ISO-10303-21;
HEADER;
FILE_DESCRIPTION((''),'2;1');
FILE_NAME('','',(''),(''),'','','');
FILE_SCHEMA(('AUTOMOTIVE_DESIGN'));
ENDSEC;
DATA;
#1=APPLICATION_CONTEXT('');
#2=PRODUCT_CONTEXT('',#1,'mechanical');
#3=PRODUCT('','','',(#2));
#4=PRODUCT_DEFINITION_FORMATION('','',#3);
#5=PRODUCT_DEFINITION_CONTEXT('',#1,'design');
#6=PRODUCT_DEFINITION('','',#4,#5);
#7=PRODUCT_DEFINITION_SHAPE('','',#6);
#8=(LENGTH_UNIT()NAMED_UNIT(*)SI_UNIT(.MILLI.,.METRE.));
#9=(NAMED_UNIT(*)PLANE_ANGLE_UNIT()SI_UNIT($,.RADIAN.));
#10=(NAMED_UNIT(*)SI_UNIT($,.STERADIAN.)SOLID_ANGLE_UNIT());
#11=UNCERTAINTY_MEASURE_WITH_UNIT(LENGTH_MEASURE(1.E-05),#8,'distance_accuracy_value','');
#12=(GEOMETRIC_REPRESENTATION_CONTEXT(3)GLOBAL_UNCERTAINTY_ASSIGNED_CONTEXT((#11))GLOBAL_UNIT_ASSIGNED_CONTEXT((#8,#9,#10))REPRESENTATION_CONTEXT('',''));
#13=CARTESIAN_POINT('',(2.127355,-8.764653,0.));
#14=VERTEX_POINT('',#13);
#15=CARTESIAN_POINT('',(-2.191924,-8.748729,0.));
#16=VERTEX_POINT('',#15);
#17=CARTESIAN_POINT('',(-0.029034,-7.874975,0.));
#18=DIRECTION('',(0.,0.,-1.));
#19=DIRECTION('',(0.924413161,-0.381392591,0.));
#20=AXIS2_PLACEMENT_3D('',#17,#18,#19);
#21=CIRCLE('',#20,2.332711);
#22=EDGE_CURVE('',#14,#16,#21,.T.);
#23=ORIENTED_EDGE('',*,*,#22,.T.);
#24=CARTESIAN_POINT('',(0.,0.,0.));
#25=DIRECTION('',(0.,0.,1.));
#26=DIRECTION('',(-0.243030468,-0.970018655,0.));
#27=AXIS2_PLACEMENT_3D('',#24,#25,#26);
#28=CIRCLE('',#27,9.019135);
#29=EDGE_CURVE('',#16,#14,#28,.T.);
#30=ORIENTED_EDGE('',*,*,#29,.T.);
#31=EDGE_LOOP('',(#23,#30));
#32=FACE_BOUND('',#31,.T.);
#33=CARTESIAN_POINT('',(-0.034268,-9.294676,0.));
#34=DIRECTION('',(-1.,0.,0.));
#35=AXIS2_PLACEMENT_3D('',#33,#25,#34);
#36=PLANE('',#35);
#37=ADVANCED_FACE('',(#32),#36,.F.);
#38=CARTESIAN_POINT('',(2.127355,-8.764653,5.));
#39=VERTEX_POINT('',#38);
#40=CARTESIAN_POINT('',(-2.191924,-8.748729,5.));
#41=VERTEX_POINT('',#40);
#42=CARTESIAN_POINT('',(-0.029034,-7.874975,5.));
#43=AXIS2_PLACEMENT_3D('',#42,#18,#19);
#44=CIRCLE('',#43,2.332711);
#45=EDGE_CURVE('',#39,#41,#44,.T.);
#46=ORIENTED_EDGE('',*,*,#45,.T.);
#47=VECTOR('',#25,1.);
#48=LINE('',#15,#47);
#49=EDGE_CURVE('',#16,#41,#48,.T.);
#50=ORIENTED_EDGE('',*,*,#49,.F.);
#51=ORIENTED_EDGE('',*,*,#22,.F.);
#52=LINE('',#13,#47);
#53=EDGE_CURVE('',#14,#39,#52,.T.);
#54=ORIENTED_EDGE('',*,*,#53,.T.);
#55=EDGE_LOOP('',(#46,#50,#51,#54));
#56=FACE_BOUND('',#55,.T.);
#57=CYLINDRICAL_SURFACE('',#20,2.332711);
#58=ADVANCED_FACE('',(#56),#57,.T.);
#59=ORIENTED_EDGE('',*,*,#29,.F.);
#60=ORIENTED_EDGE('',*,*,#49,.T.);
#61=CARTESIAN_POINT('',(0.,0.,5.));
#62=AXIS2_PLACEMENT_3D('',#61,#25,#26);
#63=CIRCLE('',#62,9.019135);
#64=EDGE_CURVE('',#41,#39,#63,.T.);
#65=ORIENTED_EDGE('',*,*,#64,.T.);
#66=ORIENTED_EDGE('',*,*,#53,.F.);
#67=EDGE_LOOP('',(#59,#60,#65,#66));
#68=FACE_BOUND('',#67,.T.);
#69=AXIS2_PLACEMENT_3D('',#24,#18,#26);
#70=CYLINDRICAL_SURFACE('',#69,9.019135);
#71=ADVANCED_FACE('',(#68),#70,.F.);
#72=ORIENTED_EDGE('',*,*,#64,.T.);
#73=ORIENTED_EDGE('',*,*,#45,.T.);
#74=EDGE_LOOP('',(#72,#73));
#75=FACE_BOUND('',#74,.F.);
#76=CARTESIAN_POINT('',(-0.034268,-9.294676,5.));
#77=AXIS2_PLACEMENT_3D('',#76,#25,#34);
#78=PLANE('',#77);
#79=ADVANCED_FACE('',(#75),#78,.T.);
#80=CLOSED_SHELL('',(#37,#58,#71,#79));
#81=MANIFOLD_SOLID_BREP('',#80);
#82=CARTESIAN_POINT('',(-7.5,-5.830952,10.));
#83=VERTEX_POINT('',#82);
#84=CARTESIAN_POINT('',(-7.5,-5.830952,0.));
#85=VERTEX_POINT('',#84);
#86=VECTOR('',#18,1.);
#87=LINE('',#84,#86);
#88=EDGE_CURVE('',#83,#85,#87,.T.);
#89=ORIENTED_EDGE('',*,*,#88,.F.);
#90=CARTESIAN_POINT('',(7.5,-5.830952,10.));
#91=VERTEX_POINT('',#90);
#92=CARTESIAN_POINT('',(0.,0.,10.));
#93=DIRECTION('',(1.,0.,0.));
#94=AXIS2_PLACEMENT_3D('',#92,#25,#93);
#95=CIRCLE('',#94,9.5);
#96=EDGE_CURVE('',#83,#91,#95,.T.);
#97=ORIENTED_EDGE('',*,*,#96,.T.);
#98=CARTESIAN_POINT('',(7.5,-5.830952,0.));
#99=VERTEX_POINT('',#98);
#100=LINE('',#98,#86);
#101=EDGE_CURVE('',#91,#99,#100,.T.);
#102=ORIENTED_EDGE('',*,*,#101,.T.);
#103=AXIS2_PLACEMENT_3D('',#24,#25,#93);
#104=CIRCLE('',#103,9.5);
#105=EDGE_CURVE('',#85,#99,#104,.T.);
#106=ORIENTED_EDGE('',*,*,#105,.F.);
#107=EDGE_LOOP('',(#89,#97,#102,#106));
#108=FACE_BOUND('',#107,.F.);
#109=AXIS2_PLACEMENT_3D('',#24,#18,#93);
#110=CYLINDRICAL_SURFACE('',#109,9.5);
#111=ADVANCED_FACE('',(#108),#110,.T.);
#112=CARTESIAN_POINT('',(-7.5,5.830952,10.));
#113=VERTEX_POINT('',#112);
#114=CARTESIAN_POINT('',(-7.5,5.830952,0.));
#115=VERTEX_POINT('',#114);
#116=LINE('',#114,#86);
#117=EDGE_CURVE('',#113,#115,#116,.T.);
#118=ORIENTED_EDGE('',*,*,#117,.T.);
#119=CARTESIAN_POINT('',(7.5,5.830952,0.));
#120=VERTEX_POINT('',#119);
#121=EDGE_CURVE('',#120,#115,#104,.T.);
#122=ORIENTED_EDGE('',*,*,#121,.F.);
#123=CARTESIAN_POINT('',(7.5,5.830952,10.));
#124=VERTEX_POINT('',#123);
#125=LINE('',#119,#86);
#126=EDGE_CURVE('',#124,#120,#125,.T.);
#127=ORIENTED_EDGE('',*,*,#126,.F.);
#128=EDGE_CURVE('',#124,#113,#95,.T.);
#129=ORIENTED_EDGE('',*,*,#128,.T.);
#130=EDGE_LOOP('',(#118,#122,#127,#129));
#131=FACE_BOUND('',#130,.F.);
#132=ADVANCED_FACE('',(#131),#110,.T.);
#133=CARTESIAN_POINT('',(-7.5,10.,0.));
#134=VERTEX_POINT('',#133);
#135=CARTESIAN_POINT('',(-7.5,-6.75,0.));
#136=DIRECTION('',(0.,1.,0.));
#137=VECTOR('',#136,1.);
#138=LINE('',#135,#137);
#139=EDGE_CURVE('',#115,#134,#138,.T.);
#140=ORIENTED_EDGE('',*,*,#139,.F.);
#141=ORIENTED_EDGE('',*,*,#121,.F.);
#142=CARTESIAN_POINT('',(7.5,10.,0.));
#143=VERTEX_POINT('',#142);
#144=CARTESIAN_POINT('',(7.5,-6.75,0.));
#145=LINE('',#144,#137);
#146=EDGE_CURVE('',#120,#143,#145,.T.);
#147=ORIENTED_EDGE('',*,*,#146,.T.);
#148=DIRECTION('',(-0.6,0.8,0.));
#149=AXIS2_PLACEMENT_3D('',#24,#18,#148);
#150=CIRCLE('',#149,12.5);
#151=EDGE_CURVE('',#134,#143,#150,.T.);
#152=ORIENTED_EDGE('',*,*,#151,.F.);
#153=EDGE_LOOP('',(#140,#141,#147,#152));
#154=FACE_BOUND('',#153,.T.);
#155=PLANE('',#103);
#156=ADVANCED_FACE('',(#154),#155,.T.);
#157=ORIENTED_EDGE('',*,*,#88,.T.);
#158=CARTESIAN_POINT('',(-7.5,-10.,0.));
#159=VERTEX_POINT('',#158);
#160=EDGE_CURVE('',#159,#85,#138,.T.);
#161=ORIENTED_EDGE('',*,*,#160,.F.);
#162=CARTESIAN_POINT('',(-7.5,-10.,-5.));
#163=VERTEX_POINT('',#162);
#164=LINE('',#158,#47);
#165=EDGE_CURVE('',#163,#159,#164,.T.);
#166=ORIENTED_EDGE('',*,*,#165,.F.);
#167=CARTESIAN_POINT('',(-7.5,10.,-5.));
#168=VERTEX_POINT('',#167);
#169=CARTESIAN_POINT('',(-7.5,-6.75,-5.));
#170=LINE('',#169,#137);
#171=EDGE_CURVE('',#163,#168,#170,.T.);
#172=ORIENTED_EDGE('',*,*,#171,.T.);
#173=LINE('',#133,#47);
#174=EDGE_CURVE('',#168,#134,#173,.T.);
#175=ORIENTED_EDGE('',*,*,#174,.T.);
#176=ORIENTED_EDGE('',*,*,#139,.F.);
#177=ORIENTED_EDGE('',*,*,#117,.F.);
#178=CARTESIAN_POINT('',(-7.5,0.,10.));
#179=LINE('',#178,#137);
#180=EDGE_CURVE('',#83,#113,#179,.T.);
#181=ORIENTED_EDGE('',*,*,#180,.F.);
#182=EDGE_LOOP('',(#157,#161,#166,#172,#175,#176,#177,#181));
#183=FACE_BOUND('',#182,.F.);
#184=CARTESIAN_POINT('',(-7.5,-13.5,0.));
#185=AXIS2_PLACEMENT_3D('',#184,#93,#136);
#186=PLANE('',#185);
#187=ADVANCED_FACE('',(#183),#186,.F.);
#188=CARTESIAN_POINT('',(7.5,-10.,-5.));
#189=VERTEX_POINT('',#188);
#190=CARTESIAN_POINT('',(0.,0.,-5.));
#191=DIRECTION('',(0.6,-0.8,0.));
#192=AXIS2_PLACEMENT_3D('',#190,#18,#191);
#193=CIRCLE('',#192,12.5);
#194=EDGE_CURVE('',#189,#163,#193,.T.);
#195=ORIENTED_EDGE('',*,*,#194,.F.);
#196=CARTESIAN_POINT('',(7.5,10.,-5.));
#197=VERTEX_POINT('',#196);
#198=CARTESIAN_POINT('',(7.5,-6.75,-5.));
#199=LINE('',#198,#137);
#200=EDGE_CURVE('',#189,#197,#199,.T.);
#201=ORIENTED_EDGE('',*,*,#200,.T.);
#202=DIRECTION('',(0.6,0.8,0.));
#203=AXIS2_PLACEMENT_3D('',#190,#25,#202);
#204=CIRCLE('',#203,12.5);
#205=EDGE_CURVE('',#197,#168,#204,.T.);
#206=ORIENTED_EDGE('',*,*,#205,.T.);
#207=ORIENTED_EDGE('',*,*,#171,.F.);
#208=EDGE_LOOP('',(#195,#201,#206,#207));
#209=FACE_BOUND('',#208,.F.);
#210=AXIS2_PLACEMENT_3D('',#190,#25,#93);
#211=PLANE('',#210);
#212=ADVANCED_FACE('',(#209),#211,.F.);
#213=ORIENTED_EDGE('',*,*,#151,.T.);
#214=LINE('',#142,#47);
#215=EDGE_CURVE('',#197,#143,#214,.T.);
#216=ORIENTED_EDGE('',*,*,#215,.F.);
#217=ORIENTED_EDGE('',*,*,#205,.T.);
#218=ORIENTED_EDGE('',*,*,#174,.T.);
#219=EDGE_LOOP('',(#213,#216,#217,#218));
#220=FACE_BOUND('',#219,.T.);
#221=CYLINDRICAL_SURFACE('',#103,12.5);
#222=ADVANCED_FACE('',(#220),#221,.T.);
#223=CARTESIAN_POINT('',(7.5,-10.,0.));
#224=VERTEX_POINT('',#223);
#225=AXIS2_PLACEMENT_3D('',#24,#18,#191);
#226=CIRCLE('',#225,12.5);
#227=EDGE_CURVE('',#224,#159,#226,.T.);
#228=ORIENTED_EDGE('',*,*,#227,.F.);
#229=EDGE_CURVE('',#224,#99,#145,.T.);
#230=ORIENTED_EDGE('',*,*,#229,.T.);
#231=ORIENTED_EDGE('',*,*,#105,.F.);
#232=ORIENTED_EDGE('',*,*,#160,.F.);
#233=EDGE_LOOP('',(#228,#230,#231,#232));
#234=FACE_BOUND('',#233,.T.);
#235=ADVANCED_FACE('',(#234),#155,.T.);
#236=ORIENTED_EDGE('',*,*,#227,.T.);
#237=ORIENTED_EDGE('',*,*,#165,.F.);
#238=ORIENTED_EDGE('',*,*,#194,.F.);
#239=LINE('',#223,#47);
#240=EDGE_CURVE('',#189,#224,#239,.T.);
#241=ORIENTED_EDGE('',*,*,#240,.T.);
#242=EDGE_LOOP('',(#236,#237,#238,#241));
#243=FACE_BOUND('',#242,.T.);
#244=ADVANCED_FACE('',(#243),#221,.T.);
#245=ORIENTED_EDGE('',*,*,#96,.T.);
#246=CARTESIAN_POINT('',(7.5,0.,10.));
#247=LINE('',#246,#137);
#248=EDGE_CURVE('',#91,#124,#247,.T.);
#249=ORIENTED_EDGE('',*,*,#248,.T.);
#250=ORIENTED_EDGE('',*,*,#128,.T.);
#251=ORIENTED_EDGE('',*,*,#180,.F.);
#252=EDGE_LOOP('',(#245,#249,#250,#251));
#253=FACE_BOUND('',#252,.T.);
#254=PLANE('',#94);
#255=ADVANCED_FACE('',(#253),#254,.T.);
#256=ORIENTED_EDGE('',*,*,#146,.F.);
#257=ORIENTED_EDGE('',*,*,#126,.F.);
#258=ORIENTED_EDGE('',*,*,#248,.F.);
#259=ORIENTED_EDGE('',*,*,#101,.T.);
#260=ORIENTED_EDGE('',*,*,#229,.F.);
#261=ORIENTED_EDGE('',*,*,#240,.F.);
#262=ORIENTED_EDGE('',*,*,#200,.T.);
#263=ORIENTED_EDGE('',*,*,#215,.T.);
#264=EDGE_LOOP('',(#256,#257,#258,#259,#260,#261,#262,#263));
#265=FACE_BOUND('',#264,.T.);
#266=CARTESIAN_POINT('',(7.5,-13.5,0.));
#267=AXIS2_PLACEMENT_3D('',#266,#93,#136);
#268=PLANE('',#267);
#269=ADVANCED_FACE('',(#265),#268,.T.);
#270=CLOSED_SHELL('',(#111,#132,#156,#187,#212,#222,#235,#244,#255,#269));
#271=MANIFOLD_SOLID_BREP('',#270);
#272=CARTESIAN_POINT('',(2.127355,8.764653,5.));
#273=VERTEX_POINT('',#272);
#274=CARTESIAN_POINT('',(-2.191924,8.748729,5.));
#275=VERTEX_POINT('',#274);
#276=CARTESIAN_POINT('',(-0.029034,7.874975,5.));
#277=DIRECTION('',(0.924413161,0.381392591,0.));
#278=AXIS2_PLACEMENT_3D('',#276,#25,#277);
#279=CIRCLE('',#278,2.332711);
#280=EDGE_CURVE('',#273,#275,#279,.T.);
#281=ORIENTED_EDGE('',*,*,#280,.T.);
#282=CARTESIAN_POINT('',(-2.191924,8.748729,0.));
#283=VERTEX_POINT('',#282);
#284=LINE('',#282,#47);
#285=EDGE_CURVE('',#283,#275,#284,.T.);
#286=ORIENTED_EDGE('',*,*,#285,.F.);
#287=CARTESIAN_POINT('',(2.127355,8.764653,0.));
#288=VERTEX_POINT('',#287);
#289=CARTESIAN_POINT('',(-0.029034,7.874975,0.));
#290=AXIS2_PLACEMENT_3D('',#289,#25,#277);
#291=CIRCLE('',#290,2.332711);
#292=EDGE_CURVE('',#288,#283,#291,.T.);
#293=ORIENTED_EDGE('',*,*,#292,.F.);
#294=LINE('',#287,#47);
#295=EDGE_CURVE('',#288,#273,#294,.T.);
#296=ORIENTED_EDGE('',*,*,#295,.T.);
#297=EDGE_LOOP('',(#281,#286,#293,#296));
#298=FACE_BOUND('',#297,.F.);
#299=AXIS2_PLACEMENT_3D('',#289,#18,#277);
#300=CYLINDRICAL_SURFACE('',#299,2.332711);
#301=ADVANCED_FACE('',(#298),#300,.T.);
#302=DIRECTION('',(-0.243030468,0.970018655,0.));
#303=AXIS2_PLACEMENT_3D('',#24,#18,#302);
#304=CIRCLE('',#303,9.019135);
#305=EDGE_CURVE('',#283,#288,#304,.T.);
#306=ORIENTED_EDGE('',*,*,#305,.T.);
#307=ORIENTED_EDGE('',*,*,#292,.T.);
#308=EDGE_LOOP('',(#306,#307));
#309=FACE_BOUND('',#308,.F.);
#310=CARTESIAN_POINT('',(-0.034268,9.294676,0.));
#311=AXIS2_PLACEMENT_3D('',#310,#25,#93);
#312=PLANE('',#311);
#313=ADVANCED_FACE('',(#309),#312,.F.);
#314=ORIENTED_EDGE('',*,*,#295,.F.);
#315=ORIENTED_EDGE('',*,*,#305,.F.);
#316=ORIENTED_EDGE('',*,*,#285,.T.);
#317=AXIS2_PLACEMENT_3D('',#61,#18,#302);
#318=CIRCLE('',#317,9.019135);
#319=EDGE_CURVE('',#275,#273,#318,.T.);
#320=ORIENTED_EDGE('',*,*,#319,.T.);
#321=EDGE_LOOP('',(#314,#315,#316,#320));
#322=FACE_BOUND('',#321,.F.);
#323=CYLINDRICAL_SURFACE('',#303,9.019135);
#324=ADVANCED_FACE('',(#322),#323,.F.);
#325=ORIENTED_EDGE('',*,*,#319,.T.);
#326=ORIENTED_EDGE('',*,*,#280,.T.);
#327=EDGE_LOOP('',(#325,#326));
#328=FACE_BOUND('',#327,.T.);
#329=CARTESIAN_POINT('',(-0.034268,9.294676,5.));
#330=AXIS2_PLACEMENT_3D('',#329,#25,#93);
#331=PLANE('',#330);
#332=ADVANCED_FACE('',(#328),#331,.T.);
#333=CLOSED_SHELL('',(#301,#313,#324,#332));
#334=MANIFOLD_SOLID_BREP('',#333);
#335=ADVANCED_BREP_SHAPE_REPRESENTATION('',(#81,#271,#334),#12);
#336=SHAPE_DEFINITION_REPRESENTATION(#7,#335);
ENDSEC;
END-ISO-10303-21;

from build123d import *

# Parameters (mm, degrees)
F0_R      = 12.5
F1_DEPTH  = 5
F2_R      = 9.5
F3_DEPTH  = 10
F5_DEPTH  = 5
F7_W      = 30
F7_H      = 30
F7_W_2    = 15
F7_H_2    = 27
F8_DEPTH  = 10
F11_W     = 23.265004158
F11_H     = 35.2036263794
F12_DEPTH = 35


# Not quite as in the source:
# - a feature names something its author has since deleted; it is built from what else it names


with BuildPart() as f1:
    # F0 (on Top) → F1 (new body)
    with BuildSketch(Plane.XY):
        Circle(F0_R)
    extrude(amount=-F1_DEPTH)

    # F2 (on Top) → F3 (join)
    with BuildSketch(Plane.XY):
        Circle(F2_R)
    extrude(amount=F3_DEPTH)


with BuildPart() as f5:
    # F4 (on Top) → F5 (new body)
    with BuildSketch(Plane.XY):
        with BuildLine():
            ThreePointArc((-2.19192449, 8.7487287819), (-0.0332522533, 9.0190732649), (2.1273547272, 8.7646534521))
            ThreePointArc((2.1273547272, 8.7646534521), (-0.0376344683, 10.2076699565), (-2.19192449, 8.7487287819))
        make_face()
    extrude(amount=F5_DEPTH)


with BuildPart() as f6_1:
    # F6: instance of F5
    add(f5.part.mirror(Plane.XZ))


with BuildPart() as f8:
    # F7 (on Top) → F8 (new body, symmetric)
    with BuildSketch(Plane.XY):
        Rectangle(F7_W, F7_H)
        Rectangle(F7_W_2, F7_H_2, mode=Mode.SUBTRACT)
    extrude(amount=F8_DEPTH, both=True)


with BuildPart() as f1_1:
    add(f1.part)

    # F9: cut F8
    add(f8.part, mode=Mode.SUBTRACT)


with BuildPart() as f12:
    # F11 (on face) → F12 (new body)
    with BuildSketch(Plane(origin=(0, 0, -5), x_dir=(1, 0, 0), z_dir=(0, 0, -1))):
        with Locations((0.5739731714, -1.2244740501)):
            Rectangle(F11_W, F11_H)
        with BuildLine():
            Line((-7, 10.3561575886), (-7, 13.5))
            Line((-7, 13.5), (7, 13.5))
            Line((7, 13.5), (7, 10.3561575886))
            ThreePointArc((7, 10.3561575886), (7.2521867086, 10.1811486554), (7.5, 10))
            Line((7.5, 10), (7.5, -10))
            ThreePointArc((7.5, -10), (7.2521867086, -10.1811486554), (7, -10.3561575886))
            Line((7, -10.3561575886), (7, -13.5))
            Line((7, -13.5), (-7, -13.5))
            Line((-7, -13.5), (-7, -10.3561575886))
            ThreePointArc((-7, -10.3561575886), (-7.2521867086, -10.1811486554), (-7.5, -10))
            Line((-7.5, -10), (-7.5, 10))
            ThreePointArc((-7.5, 10), (-7.2521867086, 10.1811486554), (-7, 10.3561575886))
        make_face(mode=Mode.SUBTRACT)
    extrude(amount=-F12_DEPTH)


with BuildPart() as f6_1_1:
    add(f6_1.part)

    # F13: cut F12
    add(f12.part, mode=Mode.SUBTRACT)


with BuildPart() as f5_1:
    add(f5.part)

    # F13: cut F12
    add(f12.part, mode=Mode.SUBTRACT)


with BuildPart() as f1_2:
    add(f1_1.part)

    # F13: cut F12
    add(f12.part, mode=Mode.SUBTRACT)


solid = Compound([f6_1_1.part, f5_1.part, f1_2.part])
